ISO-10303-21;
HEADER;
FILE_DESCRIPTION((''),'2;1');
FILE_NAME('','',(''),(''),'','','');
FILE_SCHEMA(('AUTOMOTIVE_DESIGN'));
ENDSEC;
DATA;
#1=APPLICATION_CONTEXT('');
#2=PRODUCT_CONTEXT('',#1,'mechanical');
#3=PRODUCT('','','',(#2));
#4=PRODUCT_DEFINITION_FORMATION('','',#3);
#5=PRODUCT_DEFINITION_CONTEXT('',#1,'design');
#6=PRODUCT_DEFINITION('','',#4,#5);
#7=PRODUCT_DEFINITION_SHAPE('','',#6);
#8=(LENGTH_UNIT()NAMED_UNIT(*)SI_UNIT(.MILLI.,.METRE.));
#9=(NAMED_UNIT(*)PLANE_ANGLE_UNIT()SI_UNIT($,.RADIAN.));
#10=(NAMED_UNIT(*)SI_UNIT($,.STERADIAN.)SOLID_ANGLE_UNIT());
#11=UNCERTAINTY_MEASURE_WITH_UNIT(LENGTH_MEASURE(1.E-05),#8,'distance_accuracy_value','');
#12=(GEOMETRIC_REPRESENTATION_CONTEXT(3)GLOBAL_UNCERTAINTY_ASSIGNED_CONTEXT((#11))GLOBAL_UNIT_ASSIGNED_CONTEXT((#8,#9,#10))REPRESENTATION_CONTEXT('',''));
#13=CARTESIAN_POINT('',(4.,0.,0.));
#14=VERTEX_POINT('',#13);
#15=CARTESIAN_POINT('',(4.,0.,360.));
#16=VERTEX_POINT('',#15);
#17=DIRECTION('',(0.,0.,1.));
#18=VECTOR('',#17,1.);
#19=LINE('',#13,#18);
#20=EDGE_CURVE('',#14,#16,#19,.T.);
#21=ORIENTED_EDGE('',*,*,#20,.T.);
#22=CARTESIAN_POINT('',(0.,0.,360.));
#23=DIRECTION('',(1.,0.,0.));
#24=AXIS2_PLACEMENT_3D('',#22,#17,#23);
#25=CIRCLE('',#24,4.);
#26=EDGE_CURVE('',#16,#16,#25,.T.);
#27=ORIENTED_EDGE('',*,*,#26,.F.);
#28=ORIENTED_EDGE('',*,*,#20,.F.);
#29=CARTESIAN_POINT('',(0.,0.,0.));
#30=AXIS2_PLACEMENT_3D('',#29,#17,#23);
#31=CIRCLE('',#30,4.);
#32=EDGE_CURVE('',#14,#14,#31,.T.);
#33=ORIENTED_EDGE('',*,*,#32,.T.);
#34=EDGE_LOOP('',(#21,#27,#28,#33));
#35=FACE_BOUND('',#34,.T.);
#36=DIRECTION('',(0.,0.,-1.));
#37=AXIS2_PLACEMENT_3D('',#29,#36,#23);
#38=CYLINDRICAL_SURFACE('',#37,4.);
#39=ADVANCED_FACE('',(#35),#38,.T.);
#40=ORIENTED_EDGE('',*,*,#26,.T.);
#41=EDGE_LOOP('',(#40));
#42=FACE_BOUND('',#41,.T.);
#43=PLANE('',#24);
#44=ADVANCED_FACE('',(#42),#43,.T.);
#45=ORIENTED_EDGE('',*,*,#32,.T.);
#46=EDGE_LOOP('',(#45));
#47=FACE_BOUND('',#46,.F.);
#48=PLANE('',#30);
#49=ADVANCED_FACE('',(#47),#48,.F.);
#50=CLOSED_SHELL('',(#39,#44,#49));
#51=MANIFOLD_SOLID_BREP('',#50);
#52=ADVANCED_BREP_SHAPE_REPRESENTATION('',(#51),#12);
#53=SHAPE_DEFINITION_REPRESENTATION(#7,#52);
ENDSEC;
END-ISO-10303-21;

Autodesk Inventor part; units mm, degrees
ref_plane "YZ Plane" through (0, 0, 0) normal (1, 0, 0) x (0, 1, 0)
ref_plane "XZ Plane" through (0, 0, 0) normal (0, 1, 0) x (-1, 0, 0)
ref_plane "XY Plane" through (0, 0, 0) normal (0, 0, 1) x (1, 0, 0)
sketch "Sketch1" plane through (0, 0, 0) normal (0, 0, 1) x (1, 0, 0)
  circle A0 centre (0, 0) radius 4
  dimension "d0" = 8
extrude "Extrusion1" add sketch "Sketch1" along normal blind 360
thread "Thread1" size "M8x1.25" class "6g" standard "ANSI Metric M Profile" full length
properties part number "Thread rod M8 x 360 mm"
